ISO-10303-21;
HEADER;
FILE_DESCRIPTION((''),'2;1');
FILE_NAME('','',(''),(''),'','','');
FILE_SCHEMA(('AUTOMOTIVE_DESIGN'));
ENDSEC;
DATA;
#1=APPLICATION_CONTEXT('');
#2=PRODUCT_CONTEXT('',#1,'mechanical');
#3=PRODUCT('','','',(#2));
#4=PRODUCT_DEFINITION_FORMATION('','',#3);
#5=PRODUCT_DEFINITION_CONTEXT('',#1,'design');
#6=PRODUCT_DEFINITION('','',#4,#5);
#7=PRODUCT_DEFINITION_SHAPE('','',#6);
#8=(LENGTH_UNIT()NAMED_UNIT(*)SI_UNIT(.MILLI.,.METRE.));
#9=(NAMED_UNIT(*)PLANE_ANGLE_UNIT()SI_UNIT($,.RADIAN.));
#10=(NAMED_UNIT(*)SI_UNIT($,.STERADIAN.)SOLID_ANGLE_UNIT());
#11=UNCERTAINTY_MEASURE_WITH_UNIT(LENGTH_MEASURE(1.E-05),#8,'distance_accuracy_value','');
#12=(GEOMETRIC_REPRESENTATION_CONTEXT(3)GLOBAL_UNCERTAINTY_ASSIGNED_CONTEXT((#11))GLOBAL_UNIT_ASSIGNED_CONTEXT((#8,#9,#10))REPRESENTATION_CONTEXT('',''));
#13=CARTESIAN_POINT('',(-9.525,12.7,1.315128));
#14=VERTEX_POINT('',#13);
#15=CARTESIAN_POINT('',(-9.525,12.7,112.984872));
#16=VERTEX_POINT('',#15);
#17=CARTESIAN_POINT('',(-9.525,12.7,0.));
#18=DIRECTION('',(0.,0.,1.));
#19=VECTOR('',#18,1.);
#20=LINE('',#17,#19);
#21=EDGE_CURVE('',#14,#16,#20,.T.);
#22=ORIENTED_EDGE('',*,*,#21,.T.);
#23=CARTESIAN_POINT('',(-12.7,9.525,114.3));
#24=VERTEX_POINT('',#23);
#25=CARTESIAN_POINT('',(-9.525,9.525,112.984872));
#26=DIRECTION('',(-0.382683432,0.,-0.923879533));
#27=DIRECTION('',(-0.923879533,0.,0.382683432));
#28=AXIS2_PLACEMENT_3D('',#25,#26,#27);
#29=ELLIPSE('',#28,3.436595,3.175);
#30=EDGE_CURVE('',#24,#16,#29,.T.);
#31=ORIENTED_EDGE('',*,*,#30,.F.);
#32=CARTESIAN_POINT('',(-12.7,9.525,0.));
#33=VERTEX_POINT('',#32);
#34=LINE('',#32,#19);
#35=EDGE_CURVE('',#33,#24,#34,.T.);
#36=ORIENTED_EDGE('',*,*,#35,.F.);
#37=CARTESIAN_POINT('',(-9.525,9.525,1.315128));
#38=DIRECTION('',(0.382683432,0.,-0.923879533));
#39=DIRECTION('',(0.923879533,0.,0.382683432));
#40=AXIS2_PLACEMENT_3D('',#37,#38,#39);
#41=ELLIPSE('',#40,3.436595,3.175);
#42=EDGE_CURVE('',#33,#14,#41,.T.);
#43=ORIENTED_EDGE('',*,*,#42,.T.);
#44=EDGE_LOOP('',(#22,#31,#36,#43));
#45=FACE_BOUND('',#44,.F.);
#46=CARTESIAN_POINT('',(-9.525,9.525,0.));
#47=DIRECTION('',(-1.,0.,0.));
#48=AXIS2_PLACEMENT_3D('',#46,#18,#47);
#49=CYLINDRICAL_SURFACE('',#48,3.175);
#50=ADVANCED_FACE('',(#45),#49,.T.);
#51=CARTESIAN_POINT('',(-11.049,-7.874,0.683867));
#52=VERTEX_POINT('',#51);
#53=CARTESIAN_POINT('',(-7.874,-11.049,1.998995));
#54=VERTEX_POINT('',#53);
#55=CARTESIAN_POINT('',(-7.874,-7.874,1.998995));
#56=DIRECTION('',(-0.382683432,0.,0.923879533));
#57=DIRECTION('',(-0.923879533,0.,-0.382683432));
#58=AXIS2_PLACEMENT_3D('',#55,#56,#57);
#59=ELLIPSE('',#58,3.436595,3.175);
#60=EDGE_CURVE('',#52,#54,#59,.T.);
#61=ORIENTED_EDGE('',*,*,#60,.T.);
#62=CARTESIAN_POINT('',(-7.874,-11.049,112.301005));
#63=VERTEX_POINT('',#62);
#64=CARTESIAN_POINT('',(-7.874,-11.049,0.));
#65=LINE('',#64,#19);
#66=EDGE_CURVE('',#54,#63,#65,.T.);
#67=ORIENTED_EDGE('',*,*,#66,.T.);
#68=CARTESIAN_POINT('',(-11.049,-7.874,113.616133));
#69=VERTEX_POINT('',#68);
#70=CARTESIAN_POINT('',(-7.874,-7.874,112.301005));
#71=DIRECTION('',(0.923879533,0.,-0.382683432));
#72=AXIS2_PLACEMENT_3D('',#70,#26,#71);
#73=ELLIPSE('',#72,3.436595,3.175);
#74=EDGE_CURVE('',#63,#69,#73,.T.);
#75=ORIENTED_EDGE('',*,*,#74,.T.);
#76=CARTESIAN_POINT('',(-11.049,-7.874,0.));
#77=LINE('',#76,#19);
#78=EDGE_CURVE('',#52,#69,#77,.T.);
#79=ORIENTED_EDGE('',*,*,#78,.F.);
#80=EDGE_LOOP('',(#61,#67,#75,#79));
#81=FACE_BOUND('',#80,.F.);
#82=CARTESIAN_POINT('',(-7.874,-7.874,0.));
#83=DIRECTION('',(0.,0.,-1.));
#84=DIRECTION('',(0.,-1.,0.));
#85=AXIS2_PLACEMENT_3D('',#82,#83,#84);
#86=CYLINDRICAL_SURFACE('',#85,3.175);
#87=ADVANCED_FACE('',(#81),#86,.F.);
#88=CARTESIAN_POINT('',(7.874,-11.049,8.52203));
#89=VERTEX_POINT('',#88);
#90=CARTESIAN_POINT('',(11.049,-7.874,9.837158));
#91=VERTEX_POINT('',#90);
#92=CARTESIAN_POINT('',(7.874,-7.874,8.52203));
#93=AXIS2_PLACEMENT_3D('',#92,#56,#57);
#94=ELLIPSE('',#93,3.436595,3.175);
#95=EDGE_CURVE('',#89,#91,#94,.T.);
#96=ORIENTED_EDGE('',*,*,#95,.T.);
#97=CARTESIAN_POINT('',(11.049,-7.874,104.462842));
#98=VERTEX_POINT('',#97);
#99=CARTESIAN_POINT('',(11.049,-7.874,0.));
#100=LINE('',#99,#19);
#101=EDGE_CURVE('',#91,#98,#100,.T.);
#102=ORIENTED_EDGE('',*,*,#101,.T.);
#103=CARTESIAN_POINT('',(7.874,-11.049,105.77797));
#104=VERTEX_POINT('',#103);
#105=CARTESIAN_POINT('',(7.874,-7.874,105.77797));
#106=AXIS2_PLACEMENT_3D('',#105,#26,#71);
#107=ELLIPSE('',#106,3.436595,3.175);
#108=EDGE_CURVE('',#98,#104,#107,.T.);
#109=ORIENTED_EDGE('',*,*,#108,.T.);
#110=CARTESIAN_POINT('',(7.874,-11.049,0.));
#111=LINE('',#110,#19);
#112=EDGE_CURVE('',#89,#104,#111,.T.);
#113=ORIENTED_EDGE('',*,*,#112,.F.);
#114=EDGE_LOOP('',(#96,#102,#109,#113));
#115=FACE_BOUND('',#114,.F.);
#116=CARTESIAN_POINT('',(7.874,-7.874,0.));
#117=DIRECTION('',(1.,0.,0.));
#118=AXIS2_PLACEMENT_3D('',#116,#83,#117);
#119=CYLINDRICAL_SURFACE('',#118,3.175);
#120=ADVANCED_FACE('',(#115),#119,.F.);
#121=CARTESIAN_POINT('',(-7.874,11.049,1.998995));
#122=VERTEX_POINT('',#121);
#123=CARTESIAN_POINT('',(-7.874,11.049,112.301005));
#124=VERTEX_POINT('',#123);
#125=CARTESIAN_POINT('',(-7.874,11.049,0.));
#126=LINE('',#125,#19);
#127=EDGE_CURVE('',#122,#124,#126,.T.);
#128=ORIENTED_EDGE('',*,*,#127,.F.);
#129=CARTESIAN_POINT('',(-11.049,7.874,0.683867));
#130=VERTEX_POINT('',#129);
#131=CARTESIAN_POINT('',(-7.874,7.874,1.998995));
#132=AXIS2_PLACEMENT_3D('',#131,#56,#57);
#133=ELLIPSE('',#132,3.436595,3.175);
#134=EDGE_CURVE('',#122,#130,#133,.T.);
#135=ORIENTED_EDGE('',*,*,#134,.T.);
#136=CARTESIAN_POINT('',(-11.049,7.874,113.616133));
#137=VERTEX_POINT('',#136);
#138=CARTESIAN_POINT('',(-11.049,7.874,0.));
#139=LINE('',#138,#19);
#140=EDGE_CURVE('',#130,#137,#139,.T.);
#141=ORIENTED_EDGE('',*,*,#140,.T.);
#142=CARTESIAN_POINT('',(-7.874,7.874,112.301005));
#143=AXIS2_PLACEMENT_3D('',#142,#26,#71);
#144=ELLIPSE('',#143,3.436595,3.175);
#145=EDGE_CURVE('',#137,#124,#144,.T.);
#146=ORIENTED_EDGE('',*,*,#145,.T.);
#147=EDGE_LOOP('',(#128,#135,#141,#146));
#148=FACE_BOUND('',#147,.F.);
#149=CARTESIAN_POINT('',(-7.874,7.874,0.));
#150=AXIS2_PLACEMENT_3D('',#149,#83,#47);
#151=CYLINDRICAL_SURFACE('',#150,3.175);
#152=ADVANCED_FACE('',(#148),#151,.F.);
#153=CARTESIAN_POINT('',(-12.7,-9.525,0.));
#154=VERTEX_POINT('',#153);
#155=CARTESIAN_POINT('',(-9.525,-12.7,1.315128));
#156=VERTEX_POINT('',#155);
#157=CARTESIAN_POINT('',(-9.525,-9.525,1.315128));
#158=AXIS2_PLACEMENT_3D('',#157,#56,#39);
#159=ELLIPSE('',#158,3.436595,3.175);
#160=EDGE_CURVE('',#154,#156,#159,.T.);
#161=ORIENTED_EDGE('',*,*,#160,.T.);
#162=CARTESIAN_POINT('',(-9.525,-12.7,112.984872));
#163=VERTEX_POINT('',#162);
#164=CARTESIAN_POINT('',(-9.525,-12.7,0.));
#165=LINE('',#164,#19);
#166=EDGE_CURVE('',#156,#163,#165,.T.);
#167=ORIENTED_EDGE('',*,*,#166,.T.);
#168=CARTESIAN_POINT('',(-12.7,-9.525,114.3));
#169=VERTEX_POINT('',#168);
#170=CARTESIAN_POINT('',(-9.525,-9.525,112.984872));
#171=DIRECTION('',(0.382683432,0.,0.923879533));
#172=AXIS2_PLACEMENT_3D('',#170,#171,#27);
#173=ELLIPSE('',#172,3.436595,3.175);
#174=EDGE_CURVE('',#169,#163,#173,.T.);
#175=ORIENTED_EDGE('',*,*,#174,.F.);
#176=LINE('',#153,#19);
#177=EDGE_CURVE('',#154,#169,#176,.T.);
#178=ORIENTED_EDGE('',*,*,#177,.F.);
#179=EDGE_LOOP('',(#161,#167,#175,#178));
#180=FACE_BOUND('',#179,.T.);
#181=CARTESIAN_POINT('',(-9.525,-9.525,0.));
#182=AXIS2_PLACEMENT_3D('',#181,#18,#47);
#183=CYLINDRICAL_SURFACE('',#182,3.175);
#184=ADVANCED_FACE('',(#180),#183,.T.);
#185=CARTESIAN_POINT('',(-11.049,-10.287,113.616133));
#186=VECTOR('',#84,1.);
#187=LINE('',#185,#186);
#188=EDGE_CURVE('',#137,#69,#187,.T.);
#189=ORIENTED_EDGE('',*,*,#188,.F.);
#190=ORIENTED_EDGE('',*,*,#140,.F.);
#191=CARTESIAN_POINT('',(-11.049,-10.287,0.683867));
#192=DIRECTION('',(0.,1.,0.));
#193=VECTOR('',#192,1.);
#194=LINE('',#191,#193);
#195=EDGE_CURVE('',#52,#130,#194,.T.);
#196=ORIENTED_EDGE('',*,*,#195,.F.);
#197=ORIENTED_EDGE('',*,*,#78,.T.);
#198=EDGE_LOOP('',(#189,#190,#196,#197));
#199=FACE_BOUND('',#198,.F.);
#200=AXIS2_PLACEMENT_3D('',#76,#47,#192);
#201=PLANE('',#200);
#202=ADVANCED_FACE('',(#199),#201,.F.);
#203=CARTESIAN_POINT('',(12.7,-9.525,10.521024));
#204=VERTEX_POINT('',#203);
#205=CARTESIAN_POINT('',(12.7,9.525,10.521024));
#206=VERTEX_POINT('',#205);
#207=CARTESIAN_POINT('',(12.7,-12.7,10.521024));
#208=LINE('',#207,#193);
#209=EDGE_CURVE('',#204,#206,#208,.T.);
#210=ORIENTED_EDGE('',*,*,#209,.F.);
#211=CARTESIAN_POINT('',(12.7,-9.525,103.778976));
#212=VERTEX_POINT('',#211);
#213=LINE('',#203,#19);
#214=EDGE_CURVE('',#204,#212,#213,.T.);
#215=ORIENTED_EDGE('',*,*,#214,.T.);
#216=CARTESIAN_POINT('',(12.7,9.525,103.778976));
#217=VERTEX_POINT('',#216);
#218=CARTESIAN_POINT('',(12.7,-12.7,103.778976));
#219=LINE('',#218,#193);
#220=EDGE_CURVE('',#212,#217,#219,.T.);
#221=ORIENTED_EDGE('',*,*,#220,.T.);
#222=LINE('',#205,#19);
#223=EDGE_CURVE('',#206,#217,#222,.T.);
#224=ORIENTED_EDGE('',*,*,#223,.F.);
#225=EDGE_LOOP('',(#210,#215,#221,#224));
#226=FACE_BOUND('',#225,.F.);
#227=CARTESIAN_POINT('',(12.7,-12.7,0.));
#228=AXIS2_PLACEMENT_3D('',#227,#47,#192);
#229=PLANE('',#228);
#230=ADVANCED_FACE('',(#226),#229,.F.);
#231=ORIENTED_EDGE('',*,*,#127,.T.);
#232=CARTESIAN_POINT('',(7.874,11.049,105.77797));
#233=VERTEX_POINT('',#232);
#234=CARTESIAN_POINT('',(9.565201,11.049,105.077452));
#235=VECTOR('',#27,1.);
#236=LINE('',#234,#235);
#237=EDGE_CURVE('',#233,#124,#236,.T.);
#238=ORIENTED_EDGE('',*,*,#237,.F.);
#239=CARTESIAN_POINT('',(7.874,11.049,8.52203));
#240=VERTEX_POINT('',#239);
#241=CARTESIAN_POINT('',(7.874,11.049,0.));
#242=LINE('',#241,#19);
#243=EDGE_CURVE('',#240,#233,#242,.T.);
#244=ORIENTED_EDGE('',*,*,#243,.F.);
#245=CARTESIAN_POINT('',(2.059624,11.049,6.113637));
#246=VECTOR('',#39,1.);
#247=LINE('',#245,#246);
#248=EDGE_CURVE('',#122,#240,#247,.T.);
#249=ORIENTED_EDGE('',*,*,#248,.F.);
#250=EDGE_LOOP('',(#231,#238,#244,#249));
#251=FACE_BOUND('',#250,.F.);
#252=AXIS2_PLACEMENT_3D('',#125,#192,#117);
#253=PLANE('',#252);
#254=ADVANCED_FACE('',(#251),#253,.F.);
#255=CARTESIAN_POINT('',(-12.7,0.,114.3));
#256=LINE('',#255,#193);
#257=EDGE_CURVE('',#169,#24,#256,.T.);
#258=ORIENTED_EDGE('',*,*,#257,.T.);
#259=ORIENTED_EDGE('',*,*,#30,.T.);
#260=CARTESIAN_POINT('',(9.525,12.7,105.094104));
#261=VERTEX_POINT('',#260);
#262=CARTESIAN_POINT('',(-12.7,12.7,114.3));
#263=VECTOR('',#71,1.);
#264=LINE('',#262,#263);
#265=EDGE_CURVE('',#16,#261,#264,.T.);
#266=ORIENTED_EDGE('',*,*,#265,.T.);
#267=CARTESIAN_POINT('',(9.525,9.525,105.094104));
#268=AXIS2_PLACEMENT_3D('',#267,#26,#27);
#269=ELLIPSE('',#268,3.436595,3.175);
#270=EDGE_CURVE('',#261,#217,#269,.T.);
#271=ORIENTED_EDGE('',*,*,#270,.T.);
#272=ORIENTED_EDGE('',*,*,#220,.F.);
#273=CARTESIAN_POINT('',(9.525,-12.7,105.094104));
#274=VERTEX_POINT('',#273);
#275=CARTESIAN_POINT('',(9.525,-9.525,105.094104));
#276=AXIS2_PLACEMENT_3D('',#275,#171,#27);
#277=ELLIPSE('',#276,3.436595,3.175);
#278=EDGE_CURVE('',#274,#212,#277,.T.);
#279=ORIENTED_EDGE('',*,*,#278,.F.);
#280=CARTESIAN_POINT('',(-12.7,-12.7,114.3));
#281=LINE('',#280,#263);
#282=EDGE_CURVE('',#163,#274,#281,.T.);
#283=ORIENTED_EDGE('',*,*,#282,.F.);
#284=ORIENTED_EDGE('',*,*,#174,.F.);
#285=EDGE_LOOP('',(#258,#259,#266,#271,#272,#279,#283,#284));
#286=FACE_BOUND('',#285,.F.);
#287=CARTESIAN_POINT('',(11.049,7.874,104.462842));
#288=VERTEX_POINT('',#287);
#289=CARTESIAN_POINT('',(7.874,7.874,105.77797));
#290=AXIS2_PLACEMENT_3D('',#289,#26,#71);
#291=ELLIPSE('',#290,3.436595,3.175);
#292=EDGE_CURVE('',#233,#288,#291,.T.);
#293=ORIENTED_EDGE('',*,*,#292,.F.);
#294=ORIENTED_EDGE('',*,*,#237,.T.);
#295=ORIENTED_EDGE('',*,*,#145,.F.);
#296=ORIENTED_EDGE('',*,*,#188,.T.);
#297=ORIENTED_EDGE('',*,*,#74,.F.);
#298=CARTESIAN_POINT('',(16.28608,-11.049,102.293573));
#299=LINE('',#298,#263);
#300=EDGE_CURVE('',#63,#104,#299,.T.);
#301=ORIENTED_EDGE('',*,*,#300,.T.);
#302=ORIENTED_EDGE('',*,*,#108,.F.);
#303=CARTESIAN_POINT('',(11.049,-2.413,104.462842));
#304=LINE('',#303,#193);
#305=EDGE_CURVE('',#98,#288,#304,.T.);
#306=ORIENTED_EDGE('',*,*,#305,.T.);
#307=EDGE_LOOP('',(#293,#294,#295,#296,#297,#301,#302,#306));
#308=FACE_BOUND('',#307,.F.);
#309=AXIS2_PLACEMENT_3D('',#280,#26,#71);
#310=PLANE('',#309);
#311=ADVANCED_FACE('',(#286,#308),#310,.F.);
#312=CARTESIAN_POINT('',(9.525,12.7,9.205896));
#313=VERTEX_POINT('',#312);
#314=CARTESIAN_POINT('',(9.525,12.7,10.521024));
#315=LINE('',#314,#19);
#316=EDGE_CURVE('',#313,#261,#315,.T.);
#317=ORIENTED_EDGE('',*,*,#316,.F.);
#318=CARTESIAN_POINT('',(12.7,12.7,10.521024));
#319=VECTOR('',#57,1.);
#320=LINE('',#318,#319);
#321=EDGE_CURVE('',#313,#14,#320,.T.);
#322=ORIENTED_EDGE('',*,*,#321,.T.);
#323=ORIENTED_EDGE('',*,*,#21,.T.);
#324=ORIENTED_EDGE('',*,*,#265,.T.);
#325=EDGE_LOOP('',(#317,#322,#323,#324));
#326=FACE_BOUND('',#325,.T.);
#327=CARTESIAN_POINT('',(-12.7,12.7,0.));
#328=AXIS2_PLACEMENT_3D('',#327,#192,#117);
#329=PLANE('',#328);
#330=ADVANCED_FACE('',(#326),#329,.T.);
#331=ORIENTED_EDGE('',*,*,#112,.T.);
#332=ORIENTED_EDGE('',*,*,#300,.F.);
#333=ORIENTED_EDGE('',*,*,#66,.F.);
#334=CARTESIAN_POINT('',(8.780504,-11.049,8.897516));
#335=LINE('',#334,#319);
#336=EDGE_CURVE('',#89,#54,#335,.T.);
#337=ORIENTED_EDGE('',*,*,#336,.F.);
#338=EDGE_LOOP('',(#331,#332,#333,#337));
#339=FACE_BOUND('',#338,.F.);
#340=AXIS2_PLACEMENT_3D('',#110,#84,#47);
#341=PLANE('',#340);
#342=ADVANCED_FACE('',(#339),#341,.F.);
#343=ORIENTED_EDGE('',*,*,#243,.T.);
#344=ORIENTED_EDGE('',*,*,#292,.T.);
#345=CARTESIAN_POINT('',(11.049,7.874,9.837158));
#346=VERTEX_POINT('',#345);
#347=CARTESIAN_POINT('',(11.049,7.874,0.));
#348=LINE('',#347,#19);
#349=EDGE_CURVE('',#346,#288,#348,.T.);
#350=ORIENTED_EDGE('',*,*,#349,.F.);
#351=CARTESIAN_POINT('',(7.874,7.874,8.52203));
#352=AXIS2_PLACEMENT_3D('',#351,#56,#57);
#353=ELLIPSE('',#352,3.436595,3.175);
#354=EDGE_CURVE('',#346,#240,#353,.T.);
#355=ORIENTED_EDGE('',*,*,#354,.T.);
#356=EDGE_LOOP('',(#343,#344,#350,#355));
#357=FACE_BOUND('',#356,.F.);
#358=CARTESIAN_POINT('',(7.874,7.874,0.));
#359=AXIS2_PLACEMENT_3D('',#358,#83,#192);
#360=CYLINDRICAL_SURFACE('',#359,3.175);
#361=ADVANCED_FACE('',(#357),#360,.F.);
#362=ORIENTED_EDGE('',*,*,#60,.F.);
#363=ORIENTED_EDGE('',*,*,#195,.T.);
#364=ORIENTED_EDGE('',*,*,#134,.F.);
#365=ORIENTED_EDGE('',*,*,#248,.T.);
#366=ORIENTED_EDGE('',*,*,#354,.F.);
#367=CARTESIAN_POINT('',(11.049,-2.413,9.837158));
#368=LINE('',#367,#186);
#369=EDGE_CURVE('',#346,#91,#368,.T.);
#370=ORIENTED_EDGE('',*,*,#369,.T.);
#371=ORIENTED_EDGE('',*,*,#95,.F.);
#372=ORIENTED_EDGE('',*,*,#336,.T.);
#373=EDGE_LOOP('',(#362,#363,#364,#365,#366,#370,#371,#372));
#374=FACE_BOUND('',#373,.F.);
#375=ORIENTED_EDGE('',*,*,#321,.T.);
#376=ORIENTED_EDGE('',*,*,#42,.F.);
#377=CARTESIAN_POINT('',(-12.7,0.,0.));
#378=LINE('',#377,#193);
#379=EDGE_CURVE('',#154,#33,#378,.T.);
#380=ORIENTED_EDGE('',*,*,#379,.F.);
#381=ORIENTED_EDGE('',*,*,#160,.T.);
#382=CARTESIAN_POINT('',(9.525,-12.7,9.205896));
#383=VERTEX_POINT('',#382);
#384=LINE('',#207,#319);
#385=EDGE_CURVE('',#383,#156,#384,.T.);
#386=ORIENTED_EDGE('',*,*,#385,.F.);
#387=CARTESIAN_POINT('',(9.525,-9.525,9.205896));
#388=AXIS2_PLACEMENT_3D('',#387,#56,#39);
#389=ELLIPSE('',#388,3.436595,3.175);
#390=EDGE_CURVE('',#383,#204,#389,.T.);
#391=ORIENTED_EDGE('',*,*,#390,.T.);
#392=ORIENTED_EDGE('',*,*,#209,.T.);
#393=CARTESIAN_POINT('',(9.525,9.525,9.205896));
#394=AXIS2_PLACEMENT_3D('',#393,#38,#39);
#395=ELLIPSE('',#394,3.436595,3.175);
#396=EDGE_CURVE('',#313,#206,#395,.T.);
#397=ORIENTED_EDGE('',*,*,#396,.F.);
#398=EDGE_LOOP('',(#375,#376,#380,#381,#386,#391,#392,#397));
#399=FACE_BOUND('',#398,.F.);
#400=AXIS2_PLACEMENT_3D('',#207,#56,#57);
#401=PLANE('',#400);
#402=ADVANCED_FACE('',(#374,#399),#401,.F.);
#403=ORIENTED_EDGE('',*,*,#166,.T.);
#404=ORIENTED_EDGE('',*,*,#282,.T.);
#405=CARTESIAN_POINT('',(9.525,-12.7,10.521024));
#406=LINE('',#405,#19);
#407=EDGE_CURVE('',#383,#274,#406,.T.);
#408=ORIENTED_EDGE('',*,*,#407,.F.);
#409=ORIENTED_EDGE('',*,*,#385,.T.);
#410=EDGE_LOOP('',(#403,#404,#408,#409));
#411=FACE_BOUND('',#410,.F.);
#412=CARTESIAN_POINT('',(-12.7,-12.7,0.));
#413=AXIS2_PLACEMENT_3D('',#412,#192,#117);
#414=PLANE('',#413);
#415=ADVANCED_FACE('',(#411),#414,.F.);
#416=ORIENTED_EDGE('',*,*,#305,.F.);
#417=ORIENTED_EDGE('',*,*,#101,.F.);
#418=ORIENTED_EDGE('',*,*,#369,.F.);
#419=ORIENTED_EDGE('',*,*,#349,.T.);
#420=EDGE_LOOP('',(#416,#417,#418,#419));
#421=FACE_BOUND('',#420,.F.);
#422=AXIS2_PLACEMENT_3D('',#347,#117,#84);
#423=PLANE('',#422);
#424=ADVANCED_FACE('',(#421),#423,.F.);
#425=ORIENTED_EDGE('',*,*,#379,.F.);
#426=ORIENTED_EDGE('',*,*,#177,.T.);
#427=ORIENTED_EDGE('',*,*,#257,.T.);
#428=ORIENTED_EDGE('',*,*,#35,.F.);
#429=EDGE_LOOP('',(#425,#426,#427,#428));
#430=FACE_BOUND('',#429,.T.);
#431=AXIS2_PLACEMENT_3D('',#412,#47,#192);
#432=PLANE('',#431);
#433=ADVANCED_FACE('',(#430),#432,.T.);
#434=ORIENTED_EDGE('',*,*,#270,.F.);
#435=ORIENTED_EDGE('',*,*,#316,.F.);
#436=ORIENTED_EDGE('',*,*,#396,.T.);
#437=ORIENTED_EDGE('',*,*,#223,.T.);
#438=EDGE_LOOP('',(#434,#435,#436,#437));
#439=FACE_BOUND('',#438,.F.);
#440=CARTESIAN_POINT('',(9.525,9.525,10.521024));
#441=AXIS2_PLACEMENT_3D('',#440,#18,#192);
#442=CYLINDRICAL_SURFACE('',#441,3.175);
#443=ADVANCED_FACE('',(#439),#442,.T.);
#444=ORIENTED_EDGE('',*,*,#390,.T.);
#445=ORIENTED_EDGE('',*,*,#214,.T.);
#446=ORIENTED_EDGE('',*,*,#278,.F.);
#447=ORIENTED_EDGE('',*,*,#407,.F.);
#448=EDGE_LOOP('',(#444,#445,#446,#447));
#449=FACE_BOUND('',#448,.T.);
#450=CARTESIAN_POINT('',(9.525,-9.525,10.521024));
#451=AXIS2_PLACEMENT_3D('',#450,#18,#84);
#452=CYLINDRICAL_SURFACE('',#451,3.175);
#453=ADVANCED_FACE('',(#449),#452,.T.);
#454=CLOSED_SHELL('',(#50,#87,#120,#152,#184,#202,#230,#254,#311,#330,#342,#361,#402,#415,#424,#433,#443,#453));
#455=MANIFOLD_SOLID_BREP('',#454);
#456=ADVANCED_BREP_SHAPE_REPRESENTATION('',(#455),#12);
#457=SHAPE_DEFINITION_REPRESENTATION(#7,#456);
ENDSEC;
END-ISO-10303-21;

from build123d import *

# Parameters (mm, degrees)
F1_W     = 25.4
F1_H     = 25.4
F2_DEPTH = 114.3
F4_DEPTH = 25.4
F5_R     = 3.175


# Not quite as in the source:
# - a variable given as a bare number and used for a length is read in inches; the dataset says mm whatever the document's units were


with BuildPart() as f2:
    # F1 (on Top) → F2 (new body)
    with BuildSketch(Plane.XY):
        Rectangle(F1_W, F1_H)
        with BuildLine():
            ThreePointArc((-11.049, 7.874), (-10.1190640303, 10.1190640303), (-7.874, 11.049))
            Line((-7.874, 11.049), (7.874, 11.049))
            ThreePointArc((7.874, 11.049), (10.1190640303, 10.1190640303), (11.049, 7.874))
            Line((11.049, 7.874), (11.049, -7.874))
            ThreePointArc((11.049, -7.874), (10.1190640303, -10.1190640303), (7.874, -11.049))
            Line((7.874, -11.049), (-7.874, -11.049))
            ThreePointArc((-7.874, -11.049), (-10.1190640303, -10.1190640303), (-11.049, -7.874))
            Line((-11.049, -7.874), (-11.049, 7.874))
        make_face(mode=Mode.SUBTRACT)
    extrude(amount=F2_DEPTH)

    # F3 (on face) → F4 (cut)
    with BuildSketch(Plane.XZ.offset(12.7)):
        Polygon((12.7, 10.5210244843), (-12.7, 0), (12.7, 0), align=None)
        Polygon((12.7, 114.3), (-12.7, 114.3), (12.7, 103.7789755157), align=None)
    extrude(amount=-F4_DEPTH, mode=Mode.SUBTRACT)

    # F5
    f5_edges = [f2.edges().sort_by_distance(p)[0] for p in [
        (-12.7, 12.7, 57.15),
        (12.7, 12.7, 57.15),
        (-12.7, -12.7, 57.15),
        (12.7, -12.7, 57.15),
    ]]
    fillet(f5_edges, radius=F5_R)


solid = f2.part
